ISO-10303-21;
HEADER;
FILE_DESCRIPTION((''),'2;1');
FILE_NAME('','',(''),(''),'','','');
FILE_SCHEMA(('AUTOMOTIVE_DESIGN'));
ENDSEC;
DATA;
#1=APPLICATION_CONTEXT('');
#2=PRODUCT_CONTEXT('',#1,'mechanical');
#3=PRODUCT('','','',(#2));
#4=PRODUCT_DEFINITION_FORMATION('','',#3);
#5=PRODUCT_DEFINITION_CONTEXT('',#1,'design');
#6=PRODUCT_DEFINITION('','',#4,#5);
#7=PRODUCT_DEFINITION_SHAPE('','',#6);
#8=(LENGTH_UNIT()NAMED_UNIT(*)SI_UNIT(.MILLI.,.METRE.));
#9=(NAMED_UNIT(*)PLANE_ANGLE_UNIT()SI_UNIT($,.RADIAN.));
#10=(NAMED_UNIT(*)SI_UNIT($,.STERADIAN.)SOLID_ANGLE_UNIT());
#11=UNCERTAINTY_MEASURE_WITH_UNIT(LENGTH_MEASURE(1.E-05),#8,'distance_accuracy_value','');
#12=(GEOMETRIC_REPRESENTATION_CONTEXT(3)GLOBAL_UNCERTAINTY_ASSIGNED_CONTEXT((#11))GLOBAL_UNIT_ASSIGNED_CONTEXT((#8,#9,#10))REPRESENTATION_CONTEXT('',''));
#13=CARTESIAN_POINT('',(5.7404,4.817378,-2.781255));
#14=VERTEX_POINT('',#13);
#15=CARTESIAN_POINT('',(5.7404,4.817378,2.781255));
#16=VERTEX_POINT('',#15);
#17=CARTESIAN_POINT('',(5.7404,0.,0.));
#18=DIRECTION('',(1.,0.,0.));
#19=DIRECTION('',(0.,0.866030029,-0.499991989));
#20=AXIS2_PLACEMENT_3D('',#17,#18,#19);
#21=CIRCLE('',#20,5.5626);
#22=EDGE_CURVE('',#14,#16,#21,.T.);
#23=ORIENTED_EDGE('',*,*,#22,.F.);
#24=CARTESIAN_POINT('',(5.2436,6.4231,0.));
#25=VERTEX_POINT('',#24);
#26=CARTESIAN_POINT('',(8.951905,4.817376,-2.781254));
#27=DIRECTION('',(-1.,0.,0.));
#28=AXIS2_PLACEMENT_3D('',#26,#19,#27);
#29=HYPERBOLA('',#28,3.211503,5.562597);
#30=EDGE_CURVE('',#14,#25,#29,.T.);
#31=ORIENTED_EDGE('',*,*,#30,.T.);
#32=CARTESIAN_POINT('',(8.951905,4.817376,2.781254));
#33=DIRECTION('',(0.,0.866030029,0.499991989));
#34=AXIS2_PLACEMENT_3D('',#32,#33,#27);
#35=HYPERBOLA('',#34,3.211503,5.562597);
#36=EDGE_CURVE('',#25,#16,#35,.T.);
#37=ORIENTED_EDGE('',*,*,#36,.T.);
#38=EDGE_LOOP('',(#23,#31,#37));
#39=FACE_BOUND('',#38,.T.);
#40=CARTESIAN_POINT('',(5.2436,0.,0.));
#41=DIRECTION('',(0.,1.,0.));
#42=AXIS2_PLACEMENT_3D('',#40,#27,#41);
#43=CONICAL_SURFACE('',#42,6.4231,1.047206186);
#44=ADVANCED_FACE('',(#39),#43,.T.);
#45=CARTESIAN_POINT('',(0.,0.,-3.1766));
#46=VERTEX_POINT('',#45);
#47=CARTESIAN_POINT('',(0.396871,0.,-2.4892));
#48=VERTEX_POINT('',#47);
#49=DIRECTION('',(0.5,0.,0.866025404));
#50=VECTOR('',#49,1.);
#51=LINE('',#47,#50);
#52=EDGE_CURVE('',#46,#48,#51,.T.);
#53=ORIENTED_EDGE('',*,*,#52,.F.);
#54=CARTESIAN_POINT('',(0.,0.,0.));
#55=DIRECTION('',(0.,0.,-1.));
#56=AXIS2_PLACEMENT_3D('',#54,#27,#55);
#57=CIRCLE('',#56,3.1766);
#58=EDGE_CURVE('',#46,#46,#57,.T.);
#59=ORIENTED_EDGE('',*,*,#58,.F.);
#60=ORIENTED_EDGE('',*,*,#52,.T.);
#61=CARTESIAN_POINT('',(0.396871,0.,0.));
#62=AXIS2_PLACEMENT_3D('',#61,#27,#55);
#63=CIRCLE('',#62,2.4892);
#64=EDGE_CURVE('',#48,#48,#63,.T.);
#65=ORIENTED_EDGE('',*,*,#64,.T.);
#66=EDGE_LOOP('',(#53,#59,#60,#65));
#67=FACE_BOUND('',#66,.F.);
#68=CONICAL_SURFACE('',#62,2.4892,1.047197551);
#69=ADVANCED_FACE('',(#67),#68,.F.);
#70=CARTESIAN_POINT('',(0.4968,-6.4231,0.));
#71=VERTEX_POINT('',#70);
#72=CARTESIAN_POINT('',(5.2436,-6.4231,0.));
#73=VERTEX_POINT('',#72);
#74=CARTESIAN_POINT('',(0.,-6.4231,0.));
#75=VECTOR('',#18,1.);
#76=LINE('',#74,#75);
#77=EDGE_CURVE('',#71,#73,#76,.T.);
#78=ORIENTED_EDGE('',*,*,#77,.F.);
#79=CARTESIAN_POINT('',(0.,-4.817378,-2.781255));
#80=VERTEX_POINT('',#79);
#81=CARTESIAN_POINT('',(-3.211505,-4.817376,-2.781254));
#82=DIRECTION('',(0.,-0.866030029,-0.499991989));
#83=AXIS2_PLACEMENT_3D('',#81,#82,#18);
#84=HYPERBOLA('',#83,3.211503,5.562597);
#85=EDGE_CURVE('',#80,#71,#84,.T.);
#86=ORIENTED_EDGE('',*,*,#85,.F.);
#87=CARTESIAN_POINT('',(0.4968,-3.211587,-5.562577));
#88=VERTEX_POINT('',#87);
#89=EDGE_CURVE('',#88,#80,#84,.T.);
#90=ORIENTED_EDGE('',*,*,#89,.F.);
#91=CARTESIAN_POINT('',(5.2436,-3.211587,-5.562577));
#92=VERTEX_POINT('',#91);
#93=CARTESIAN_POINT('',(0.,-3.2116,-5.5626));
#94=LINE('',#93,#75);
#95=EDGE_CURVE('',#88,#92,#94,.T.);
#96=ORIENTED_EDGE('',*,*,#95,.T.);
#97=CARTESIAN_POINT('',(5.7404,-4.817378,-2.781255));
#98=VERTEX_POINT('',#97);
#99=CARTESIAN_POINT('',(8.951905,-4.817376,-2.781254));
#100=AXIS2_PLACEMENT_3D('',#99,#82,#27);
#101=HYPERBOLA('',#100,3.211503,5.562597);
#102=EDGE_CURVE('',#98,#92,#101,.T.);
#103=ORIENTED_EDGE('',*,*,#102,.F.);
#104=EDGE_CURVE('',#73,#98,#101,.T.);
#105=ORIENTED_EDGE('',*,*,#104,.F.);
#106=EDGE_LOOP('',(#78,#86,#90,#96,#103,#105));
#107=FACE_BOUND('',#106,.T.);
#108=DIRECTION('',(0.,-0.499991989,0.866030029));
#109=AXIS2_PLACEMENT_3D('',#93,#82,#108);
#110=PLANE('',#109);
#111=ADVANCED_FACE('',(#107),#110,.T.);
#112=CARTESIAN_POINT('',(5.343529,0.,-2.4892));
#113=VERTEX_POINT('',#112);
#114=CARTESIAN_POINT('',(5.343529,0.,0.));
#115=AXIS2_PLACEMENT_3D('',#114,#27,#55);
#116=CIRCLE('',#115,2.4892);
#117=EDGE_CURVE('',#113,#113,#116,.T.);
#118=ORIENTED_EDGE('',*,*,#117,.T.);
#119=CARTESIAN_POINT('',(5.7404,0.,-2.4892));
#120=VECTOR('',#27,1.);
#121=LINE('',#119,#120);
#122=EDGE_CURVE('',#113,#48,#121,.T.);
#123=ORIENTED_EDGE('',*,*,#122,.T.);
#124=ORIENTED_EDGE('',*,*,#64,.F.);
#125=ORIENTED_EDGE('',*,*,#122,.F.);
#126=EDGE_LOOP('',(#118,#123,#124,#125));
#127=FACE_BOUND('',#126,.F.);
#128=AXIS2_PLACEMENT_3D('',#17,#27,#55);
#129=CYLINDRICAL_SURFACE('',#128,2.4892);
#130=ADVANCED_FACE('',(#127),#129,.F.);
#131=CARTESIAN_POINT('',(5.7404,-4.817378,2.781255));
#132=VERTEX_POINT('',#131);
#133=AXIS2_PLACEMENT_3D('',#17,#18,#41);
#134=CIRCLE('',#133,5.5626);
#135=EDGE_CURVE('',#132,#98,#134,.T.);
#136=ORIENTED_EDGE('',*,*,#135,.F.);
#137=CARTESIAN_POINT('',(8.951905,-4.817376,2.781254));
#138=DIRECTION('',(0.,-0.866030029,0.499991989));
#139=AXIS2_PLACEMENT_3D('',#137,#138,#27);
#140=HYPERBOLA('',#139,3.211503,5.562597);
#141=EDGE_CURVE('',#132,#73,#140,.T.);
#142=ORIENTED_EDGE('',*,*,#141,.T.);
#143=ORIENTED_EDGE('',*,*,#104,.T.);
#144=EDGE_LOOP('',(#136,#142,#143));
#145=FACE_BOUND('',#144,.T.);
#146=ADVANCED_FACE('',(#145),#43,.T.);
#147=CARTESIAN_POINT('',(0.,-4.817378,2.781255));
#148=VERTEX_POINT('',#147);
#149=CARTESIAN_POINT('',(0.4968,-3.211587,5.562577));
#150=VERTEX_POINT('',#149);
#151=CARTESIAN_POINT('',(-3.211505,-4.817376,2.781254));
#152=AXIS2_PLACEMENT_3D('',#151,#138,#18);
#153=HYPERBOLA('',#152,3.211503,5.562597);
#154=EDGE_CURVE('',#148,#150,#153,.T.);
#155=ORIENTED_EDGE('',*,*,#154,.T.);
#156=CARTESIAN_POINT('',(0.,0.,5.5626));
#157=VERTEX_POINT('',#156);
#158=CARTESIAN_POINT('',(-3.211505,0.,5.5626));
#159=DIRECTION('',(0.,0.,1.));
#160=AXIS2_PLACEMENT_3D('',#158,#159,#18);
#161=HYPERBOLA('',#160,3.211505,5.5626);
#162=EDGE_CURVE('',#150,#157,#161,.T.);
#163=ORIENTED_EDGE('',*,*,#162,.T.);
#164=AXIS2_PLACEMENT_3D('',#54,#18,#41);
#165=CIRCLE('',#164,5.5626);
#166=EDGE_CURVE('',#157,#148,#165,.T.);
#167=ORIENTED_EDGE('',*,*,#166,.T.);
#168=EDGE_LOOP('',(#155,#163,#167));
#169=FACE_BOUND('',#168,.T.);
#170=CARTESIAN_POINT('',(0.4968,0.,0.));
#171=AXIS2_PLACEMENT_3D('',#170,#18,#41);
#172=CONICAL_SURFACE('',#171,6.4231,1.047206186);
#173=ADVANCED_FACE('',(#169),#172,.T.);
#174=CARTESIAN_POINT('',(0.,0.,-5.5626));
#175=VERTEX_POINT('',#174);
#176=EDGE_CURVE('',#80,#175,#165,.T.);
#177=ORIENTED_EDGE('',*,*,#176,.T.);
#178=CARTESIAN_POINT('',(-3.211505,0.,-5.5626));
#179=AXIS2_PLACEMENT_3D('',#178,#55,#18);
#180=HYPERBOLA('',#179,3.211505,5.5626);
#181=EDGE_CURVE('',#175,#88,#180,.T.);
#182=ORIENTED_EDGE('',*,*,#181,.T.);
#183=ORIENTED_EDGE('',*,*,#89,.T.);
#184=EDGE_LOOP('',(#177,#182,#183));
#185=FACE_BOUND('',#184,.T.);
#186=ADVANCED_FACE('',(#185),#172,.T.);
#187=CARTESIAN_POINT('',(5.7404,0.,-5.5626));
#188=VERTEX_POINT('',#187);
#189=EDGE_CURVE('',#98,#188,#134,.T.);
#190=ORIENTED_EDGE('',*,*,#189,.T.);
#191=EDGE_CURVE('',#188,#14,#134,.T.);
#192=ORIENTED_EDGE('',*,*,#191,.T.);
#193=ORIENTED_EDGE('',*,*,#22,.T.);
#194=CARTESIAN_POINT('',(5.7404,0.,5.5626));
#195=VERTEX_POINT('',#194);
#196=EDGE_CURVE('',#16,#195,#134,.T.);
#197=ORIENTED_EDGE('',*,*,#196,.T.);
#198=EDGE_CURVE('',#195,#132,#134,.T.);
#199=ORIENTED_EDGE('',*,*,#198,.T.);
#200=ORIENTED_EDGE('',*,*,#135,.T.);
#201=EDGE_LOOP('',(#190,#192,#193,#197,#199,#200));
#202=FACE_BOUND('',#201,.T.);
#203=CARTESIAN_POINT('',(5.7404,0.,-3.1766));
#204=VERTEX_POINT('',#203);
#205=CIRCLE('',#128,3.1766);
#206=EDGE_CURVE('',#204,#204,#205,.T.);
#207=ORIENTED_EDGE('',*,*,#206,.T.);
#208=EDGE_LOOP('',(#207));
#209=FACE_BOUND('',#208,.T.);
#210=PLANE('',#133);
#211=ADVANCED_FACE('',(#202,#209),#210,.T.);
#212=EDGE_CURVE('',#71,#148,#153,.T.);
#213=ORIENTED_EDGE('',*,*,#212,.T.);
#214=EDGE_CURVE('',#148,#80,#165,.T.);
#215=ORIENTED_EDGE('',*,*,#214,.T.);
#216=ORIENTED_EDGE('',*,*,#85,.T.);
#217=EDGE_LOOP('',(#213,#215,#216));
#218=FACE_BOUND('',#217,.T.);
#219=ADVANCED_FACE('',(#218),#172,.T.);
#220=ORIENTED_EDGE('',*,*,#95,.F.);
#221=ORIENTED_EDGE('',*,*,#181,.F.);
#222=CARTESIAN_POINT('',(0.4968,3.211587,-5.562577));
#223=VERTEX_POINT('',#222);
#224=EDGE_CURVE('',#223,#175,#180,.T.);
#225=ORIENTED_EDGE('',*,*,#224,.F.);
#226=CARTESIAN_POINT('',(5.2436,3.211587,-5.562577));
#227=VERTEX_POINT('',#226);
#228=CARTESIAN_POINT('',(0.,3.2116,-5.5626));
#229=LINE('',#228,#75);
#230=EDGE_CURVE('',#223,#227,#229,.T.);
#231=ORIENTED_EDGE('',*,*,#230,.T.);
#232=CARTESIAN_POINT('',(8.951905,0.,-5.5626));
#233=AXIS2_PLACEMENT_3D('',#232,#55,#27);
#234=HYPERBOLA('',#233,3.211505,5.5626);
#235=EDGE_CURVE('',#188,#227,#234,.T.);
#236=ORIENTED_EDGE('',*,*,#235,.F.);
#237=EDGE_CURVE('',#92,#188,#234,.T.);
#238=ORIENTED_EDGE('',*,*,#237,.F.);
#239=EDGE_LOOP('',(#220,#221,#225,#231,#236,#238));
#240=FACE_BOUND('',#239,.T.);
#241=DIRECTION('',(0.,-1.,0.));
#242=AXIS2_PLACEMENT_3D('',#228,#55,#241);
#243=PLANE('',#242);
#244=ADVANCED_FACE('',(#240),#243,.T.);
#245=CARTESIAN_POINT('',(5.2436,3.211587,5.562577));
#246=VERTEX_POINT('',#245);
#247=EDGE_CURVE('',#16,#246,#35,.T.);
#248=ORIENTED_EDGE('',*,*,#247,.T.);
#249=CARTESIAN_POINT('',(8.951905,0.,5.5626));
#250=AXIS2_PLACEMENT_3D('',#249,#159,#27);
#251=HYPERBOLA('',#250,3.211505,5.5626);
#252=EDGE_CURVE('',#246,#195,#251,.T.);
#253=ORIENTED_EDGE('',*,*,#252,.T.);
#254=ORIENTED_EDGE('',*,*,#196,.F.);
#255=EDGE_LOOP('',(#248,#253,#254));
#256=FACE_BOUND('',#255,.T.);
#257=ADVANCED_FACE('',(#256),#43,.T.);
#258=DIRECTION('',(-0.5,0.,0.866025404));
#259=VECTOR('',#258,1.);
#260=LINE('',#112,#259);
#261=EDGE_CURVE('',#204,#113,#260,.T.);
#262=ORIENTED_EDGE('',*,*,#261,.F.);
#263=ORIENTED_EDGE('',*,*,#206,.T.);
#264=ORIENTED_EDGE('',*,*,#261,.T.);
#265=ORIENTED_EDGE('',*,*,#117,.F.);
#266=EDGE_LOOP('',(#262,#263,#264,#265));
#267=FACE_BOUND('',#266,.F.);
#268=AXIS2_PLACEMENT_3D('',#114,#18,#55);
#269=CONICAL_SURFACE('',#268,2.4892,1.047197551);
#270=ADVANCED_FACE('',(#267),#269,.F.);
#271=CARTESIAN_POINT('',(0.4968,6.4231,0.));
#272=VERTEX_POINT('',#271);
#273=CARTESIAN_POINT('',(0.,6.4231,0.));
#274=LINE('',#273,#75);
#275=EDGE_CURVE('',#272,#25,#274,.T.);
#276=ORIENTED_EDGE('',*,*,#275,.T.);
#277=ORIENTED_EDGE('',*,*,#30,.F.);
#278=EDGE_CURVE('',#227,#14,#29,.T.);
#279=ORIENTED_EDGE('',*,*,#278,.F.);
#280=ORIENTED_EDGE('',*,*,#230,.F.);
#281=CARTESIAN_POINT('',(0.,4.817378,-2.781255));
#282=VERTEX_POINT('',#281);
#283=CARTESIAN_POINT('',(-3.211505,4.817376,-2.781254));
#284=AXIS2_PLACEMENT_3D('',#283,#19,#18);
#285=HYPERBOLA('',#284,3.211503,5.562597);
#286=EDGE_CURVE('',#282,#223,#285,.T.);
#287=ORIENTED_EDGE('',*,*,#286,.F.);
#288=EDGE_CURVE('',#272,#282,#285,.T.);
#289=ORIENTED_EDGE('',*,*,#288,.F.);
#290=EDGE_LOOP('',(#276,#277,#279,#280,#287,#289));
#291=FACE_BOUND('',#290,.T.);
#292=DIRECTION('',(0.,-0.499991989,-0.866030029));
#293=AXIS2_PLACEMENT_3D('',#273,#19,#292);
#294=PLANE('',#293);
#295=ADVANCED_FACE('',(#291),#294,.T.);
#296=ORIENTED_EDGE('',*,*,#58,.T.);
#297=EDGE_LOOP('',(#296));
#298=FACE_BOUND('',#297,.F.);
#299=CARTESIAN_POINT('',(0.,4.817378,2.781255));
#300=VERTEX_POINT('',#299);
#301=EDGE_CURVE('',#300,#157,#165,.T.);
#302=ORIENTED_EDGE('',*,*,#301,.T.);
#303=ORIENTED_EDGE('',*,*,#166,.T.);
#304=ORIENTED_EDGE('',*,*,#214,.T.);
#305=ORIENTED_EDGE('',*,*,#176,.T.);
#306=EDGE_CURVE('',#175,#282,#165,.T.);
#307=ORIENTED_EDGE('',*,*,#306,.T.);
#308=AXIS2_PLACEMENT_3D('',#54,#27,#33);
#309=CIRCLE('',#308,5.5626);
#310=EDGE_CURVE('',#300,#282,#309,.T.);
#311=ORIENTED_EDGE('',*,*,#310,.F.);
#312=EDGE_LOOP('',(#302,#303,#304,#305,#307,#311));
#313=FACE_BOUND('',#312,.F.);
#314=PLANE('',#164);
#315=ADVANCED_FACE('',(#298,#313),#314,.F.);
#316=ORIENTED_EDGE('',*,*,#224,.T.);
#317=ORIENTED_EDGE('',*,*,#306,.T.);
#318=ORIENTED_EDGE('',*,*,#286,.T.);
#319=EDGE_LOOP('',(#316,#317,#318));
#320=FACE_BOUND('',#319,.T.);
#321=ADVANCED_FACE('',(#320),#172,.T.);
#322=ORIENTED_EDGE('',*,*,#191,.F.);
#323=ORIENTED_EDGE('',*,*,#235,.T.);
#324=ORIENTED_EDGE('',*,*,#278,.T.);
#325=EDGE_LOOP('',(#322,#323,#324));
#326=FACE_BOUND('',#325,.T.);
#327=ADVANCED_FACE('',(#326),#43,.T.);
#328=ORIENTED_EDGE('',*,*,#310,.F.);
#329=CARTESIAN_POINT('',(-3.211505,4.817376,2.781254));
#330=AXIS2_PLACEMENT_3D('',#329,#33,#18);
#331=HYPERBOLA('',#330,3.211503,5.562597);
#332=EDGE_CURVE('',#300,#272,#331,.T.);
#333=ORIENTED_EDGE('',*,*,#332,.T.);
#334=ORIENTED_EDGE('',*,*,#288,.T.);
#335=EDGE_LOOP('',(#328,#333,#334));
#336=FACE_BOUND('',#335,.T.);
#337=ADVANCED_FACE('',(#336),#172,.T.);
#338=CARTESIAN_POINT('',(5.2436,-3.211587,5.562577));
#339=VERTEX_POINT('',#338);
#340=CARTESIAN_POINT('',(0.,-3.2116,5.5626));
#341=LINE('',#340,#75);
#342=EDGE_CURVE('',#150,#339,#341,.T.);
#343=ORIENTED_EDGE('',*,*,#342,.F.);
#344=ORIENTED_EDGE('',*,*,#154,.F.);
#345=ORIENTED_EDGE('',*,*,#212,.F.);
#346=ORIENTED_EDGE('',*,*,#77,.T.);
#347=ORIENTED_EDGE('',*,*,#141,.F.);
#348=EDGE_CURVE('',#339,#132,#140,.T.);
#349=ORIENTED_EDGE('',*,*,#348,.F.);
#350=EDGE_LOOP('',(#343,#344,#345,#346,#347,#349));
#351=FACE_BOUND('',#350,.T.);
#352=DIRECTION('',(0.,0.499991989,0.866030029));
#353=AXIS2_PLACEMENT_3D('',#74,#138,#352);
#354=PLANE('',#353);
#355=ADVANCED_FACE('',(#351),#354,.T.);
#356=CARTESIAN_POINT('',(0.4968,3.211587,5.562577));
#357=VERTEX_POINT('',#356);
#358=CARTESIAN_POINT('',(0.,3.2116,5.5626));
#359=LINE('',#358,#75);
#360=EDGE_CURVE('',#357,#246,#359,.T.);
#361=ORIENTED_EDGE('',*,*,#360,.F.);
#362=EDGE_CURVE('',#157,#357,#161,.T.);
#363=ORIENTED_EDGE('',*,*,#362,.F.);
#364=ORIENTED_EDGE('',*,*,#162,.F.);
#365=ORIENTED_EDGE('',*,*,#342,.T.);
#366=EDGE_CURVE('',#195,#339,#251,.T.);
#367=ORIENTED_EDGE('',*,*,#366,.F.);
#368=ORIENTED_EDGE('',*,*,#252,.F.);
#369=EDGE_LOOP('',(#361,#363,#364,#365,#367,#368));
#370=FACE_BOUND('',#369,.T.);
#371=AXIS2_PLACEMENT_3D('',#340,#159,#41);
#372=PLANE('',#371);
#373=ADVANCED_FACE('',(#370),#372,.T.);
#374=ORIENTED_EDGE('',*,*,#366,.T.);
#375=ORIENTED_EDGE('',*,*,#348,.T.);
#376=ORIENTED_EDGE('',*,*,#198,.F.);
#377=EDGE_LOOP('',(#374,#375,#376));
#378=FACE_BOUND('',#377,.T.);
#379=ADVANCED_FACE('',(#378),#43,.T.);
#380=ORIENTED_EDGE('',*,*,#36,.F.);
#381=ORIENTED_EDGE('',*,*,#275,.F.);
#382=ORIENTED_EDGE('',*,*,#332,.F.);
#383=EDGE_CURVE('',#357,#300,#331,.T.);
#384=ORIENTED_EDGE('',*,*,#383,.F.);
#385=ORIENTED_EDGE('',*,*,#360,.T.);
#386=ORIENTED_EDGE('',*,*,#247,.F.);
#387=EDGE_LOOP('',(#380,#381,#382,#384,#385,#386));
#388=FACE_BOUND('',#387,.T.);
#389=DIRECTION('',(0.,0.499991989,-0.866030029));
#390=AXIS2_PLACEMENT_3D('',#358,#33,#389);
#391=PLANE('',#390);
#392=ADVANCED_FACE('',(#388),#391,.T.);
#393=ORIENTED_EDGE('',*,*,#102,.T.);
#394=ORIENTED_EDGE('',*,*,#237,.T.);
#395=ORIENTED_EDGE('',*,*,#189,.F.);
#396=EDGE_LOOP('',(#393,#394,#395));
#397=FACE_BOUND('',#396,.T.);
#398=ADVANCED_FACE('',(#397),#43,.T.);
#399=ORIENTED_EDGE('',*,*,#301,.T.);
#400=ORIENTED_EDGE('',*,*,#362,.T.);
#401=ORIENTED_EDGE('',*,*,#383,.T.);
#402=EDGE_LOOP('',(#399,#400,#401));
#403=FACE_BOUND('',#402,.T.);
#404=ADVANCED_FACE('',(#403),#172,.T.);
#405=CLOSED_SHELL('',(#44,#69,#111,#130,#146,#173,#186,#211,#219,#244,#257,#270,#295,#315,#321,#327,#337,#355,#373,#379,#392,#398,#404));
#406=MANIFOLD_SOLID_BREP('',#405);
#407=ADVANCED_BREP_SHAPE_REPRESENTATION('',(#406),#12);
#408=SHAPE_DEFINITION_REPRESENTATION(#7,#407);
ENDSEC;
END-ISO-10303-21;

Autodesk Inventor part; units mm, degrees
ref_plane "YZ Plane" through (0, 0, 0) normal (1, 0, 0) x (0, 1, 0)
ref_plane "XZ Plane" through (0, 0, 0) normal (0, 1, 0) x (-1, 0, 0)
sketch "Boceto1" plane through (0, 0, 0) normal (1, 0, 0) x (0, 1, 0)
  line L0 (-6.4231, 0) -> (-3.2116, 5.5626)
  line L1 (-3.2116, 5.5626) -> (3.2116, 5.5626)
  line L2 (3.2116, 5.5626) -> (6.4231, 0)
  line L3 (6.4231, 0) -> (3.2116, -5.5626)
  line L4 (3.2116, -5.5626) -> (-3.2116, -5.5626)
  line L5 (-3.2116, -5.5626) -> (-6.4231, 0)
  point P0 (0, 0)
  point P1 (0, 0)
  dimension "d0" = 12.8463
extrude "Cuerpo" add sketch "Boceto1" along normal blind 5.7404
sketch "Boceto2" plane through (0, 0, 0) normal (0, 0, 1) x (1, 0, 0)
  line L0 (0, 3.2116) -> (0, 6.4231) projected
  line L1 (0, 6.4231) -> (5.7404, 6.4231) projected
  line L2 (5.7404, 3.2116) -> (5.7404, 6.4231) projected
  line L3 (-1.1481, 0) -> (6.8885, 0) projected
  line L4 (0.4968, 6.4231) -> (0, 5.5626)
  line L5 (5.2436, 6.4231) -> (5.7404, 5.5626)
  dimension "d3" = 30
  dimension "d4" = 30
  dimension "d5" = 11.1252
  dimension "d6" = 11.1252
revolve "Chaflán1" cut sketch "Boceto2" angle 360 about axis through (-10, 0, 0) along (1, 0, 0)
sketch "Boceto3" plane through (5.7404, 0, 0) normal (1, 0, 0) x (0, 0, -1)
  arc A0 (-2.7813, -4.8174) -> (2.7813, -4.8174) centre (0, 0) ccw projected
hole "Rosca" at (5.7404, 0, 0) direction (-1, 0, 0) diameter 4.9784 end through all thread size "1/4-20 UNC" class "2B" standard "ANSI Unified Screw Threads"
chamfer "Chaflán2" distance 0.6874 angle 30 1 edges at (5.7404, 0, 2.4892) measured on face at (5.7404, 4.5118, -0.1)
chamfer "Chaflán3" distance 0.6874 angle 30 1 edges at (0, 0, 2.4892) measured on face at (0, 4.5118, 0.1)
ref_plane "Work Plane1" through (-12.197, 0, 0) normal (0, -0.8660254, -0.5) x (1, 0, 0)
equation "\"d0\" = 1.1547 * SW"
equation "\"d1\" = KOH"
equation "\"d3\" = ANG1"
equation "\"d4\" = ANG2"
equation "\"d5\" = SW0"
equation "\"d6\" = SW01"
equation "\"d8\" = -0.5 * GD1 + 0.5 * NND"
equation "\"d40\" = -0.5 * GD1 + 0.5 * NND"
equation "\"d10\" = -0.5 * GD1 + 0.5 * NND"
equation "\"d41\" = -0.5 * GD1 + 0.5 * NND"
equation "\"ANG1\" = 30deg"
equation "\"ANG2\" = 30deg"
equation "\"NND\" = 6.35"
equation "\"KOH\" = 5.7404"
equation "\"SW\" = 11.1252"
equation "\"SW0\" = SW"
equation "\"SW01\" = SW"
equation "\"THREADDIA\" = 6.35"
equation "\"TOA\" = 30deg"
equation "\"E0\" = 1.155 * SW"
equation "\"GD1\" = 4.975185"
properties part number "AS 2465 - 1/4  UNC" material "Acero, suave"
